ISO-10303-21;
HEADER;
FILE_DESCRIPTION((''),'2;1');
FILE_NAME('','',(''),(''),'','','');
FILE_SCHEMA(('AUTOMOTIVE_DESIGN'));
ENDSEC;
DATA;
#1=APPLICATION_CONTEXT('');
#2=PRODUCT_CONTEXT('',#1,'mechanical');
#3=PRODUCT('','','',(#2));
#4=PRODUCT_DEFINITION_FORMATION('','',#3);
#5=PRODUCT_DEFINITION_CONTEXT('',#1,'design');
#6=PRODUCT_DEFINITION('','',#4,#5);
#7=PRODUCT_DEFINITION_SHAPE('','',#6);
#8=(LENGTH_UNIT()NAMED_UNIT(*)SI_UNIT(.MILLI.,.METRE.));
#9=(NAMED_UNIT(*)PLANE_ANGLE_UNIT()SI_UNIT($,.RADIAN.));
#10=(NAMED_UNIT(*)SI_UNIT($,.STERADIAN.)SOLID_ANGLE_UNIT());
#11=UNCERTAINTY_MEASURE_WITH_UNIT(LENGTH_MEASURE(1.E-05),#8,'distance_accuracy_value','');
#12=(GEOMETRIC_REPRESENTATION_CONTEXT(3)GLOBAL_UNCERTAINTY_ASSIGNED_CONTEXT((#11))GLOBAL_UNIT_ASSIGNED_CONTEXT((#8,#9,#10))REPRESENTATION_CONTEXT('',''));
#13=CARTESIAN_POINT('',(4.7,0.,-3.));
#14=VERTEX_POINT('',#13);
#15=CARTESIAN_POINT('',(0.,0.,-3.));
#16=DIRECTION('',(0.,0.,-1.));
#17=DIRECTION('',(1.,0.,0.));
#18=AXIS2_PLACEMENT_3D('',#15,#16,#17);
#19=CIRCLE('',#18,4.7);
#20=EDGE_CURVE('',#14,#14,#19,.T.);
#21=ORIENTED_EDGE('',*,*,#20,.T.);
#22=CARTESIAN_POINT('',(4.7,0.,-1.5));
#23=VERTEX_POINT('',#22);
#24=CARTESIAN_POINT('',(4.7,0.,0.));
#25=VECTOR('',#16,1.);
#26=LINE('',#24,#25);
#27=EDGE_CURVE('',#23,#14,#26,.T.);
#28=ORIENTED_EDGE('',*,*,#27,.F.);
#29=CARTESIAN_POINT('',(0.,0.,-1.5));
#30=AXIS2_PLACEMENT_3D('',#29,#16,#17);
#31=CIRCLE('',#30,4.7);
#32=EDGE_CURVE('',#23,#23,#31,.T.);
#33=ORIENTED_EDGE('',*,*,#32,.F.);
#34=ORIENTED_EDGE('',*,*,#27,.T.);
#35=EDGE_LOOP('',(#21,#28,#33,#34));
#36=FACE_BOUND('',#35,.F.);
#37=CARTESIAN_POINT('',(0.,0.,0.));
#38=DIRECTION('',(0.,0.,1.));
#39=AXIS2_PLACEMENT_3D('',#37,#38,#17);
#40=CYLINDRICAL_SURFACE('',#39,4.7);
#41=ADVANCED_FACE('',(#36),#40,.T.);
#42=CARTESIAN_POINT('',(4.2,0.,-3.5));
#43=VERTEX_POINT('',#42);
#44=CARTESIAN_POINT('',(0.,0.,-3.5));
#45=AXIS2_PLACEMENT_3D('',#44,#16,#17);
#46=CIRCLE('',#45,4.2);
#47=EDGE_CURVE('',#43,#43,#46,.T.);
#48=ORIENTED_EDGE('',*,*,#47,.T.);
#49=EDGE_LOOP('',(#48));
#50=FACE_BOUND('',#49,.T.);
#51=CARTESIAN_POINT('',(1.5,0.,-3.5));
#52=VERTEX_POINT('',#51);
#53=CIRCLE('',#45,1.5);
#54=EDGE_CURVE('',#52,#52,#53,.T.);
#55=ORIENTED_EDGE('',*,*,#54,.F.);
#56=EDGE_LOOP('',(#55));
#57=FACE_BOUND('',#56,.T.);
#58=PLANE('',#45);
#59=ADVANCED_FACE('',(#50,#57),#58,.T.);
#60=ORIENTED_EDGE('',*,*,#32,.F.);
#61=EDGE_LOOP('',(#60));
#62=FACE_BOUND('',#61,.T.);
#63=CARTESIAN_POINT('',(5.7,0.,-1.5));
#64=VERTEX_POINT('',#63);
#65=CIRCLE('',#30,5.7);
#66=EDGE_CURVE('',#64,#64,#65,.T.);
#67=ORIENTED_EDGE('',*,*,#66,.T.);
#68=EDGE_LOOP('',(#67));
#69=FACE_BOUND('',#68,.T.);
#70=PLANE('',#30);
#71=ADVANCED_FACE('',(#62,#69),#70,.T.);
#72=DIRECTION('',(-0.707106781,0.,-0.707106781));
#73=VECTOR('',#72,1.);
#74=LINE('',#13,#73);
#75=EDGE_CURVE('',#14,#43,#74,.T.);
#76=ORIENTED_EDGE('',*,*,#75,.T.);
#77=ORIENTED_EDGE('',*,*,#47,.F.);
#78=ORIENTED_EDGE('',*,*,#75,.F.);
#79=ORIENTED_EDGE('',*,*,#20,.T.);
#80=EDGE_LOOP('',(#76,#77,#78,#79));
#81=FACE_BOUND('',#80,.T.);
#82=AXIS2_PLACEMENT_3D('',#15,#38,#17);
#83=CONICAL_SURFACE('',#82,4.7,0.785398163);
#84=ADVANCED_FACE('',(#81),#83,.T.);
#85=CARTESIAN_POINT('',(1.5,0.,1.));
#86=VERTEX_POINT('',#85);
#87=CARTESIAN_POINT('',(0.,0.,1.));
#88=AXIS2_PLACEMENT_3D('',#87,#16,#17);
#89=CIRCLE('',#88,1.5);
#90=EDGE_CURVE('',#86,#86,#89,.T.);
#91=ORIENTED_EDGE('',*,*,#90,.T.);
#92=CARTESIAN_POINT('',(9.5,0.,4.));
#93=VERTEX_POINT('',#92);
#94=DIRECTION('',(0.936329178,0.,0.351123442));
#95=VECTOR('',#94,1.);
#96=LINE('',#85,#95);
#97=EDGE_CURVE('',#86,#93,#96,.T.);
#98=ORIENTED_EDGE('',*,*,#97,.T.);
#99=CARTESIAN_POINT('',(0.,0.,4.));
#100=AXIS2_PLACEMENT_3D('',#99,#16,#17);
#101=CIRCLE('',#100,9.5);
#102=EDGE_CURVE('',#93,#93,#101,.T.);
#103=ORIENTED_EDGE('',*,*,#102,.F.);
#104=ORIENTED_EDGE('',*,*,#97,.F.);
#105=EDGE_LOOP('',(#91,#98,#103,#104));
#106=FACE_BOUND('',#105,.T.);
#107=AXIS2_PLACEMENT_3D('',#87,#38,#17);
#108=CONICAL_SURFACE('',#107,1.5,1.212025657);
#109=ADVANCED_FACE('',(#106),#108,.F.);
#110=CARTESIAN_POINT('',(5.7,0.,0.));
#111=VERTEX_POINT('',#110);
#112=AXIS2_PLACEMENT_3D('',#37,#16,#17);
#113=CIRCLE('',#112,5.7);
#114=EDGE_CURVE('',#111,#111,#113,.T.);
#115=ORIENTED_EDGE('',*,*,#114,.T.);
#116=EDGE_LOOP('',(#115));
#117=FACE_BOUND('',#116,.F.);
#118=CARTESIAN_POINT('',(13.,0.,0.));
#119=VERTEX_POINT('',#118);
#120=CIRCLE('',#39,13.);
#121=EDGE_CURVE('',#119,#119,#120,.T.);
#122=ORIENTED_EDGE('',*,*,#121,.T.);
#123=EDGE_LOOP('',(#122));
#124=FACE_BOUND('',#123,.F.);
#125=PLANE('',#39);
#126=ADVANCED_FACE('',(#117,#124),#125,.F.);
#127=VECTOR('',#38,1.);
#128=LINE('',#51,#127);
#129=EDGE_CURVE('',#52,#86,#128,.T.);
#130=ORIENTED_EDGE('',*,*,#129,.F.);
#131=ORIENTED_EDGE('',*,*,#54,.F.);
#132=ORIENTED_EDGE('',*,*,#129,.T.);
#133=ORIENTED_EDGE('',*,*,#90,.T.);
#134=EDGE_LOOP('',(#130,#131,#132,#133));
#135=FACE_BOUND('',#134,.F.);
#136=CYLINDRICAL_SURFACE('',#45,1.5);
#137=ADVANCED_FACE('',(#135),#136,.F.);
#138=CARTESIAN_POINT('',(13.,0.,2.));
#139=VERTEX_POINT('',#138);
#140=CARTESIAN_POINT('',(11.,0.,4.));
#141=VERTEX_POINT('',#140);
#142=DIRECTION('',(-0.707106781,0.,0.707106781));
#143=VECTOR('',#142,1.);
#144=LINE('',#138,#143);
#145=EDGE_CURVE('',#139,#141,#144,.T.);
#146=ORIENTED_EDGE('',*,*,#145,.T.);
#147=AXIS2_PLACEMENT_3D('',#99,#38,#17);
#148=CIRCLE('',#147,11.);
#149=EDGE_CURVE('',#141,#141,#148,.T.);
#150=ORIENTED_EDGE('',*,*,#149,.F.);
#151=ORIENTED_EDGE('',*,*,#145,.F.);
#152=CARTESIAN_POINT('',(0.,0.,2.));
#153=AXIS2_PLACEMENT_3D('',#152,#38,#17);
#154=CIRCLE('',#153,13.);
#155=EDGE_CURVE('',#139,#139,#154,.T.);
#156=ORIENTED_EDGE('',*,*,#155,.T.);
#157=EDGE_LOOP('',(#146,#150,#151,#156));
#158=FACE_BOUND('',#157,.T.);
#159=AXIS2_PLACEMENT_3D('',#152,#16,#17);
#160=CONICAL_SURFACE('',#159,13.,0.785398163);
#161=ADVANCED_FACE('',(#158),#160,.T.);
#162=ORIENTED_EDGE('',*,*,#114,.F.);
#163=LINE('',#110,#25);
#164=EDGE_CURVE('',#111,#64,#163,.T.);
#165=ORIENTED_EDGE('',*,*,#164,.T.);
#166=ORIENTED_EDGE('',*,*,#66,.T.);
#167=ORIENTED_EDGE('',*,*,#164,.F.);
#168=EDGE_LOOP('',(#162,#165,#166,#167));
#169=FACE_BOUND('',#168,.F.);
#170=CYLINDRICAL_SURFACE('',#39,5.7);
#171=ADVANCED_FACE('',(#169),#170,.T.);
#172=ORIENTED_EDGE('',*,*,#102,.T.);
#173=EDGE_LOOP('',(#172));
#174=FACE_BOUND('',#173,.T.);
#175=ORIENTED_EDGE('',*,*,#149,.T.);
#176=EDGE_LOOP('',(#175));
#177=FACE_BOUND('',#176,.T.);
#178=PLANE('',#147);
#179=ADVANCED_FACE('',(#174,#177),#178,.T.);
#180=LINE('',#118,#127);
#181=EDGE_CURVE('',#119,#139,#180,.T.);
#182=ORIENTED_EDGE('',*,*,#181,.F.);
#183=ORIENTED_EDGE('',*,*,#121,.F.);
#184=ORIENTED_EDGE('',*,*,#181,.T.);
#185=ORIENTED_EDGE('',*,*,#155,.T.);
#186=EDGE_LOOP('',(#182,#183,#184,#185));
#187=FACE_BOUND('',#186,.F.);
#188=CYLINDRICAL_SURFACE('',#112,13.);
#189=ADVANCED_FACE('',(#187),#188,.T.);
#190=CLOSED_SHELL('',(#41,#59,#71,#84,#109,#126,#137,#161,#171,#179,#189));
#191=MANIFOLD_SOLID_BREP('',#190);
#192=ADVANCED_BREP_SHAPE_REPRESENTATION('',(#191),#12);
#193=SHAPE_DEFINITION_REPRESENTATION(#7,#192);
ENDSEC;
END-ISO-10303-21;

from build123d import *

# Parameters (mm, degrees)
F0_R     = 13
F1_DEPTH = 4
F2_SIZE  = 2
F3_R     = 4.7
F4_DEPTH = 3.5
F5_SIZE  = 0.5
F6_R     = 1.5
F7_DEPTH = 25
F8_R     = 5.7
F8_R_2   = 4.7
F9_DEPTH = 1.5


# Not quite as in the source:
# - a fillet or chamfer that OpenCascade refuses, or shapes differently, is made with other operations: its cross-section is extruded or revolved along the edge and cut away or added


with BuildPart() as f1:
    # F0 (on Top) → F1 (new body)
    with BuildSketch(Plane.XY):
        Circle(F0_R)
    extrude(amount=F1_DEPTH)

    # F2
    f2_edges = [f1.edges().sort_by_distance(p)[0] for p in [
        (-13, 0, 4),
    ]]
    chamfer(f2_edges, length=F2_SIZE)

    # F3 (on face) → F4 (join)
    with BuildSketch(Plane(origin=(0, 0, 0), x_dir=(1, 0, 0), z_dir=(0, 0, -1))):
        Circle(F3_R)
    extrude(amount=F4_DEPTH)

    # F5
    f5_edges = [f1.edges().sort_by_distance(p)[0] for p in [
        (-4.7, 0, -3.5),
    ]]
    chamfer(f5_edges, length=F5_SIZE)

    # F6 (on face) → F7 (cut)
    with BuildSketch(Plane(origin=(0, 0, -3.5), x_dir=(1, 0, 0), z_dir=(0, 0, -1))):
        Circle(F6_R)
    extrude(amount=-F7_DEPTH, mode=Mode.SUBTRACT)

    # F8 (on face) → F9 (join)
    with BuildSketch(Plane(origin=(0, 0, 0), x_dir=(1, 0, 0), z_dir=(0, 0, -1))):
        Circle(F8_R)
        Circle(F8_R_2, mode=Mode.SUBTRACT)
    extrude(amount=F9_DEPTH)

    # F10: chamfer of 3 x 8 on 1 edges, made by hand

    # F10_s1 → F10_t2 (revolve, cut)
    with BuildSketch(Plane.XZ):
        Polygon((1.5, 1), (9.5, 4), (1.5, 4), align=None)
    revolve(axis=Axis((0, 0, 4), (0, 0, -1)), mode=Mode.SUBTRACT)


solid = f1.part
